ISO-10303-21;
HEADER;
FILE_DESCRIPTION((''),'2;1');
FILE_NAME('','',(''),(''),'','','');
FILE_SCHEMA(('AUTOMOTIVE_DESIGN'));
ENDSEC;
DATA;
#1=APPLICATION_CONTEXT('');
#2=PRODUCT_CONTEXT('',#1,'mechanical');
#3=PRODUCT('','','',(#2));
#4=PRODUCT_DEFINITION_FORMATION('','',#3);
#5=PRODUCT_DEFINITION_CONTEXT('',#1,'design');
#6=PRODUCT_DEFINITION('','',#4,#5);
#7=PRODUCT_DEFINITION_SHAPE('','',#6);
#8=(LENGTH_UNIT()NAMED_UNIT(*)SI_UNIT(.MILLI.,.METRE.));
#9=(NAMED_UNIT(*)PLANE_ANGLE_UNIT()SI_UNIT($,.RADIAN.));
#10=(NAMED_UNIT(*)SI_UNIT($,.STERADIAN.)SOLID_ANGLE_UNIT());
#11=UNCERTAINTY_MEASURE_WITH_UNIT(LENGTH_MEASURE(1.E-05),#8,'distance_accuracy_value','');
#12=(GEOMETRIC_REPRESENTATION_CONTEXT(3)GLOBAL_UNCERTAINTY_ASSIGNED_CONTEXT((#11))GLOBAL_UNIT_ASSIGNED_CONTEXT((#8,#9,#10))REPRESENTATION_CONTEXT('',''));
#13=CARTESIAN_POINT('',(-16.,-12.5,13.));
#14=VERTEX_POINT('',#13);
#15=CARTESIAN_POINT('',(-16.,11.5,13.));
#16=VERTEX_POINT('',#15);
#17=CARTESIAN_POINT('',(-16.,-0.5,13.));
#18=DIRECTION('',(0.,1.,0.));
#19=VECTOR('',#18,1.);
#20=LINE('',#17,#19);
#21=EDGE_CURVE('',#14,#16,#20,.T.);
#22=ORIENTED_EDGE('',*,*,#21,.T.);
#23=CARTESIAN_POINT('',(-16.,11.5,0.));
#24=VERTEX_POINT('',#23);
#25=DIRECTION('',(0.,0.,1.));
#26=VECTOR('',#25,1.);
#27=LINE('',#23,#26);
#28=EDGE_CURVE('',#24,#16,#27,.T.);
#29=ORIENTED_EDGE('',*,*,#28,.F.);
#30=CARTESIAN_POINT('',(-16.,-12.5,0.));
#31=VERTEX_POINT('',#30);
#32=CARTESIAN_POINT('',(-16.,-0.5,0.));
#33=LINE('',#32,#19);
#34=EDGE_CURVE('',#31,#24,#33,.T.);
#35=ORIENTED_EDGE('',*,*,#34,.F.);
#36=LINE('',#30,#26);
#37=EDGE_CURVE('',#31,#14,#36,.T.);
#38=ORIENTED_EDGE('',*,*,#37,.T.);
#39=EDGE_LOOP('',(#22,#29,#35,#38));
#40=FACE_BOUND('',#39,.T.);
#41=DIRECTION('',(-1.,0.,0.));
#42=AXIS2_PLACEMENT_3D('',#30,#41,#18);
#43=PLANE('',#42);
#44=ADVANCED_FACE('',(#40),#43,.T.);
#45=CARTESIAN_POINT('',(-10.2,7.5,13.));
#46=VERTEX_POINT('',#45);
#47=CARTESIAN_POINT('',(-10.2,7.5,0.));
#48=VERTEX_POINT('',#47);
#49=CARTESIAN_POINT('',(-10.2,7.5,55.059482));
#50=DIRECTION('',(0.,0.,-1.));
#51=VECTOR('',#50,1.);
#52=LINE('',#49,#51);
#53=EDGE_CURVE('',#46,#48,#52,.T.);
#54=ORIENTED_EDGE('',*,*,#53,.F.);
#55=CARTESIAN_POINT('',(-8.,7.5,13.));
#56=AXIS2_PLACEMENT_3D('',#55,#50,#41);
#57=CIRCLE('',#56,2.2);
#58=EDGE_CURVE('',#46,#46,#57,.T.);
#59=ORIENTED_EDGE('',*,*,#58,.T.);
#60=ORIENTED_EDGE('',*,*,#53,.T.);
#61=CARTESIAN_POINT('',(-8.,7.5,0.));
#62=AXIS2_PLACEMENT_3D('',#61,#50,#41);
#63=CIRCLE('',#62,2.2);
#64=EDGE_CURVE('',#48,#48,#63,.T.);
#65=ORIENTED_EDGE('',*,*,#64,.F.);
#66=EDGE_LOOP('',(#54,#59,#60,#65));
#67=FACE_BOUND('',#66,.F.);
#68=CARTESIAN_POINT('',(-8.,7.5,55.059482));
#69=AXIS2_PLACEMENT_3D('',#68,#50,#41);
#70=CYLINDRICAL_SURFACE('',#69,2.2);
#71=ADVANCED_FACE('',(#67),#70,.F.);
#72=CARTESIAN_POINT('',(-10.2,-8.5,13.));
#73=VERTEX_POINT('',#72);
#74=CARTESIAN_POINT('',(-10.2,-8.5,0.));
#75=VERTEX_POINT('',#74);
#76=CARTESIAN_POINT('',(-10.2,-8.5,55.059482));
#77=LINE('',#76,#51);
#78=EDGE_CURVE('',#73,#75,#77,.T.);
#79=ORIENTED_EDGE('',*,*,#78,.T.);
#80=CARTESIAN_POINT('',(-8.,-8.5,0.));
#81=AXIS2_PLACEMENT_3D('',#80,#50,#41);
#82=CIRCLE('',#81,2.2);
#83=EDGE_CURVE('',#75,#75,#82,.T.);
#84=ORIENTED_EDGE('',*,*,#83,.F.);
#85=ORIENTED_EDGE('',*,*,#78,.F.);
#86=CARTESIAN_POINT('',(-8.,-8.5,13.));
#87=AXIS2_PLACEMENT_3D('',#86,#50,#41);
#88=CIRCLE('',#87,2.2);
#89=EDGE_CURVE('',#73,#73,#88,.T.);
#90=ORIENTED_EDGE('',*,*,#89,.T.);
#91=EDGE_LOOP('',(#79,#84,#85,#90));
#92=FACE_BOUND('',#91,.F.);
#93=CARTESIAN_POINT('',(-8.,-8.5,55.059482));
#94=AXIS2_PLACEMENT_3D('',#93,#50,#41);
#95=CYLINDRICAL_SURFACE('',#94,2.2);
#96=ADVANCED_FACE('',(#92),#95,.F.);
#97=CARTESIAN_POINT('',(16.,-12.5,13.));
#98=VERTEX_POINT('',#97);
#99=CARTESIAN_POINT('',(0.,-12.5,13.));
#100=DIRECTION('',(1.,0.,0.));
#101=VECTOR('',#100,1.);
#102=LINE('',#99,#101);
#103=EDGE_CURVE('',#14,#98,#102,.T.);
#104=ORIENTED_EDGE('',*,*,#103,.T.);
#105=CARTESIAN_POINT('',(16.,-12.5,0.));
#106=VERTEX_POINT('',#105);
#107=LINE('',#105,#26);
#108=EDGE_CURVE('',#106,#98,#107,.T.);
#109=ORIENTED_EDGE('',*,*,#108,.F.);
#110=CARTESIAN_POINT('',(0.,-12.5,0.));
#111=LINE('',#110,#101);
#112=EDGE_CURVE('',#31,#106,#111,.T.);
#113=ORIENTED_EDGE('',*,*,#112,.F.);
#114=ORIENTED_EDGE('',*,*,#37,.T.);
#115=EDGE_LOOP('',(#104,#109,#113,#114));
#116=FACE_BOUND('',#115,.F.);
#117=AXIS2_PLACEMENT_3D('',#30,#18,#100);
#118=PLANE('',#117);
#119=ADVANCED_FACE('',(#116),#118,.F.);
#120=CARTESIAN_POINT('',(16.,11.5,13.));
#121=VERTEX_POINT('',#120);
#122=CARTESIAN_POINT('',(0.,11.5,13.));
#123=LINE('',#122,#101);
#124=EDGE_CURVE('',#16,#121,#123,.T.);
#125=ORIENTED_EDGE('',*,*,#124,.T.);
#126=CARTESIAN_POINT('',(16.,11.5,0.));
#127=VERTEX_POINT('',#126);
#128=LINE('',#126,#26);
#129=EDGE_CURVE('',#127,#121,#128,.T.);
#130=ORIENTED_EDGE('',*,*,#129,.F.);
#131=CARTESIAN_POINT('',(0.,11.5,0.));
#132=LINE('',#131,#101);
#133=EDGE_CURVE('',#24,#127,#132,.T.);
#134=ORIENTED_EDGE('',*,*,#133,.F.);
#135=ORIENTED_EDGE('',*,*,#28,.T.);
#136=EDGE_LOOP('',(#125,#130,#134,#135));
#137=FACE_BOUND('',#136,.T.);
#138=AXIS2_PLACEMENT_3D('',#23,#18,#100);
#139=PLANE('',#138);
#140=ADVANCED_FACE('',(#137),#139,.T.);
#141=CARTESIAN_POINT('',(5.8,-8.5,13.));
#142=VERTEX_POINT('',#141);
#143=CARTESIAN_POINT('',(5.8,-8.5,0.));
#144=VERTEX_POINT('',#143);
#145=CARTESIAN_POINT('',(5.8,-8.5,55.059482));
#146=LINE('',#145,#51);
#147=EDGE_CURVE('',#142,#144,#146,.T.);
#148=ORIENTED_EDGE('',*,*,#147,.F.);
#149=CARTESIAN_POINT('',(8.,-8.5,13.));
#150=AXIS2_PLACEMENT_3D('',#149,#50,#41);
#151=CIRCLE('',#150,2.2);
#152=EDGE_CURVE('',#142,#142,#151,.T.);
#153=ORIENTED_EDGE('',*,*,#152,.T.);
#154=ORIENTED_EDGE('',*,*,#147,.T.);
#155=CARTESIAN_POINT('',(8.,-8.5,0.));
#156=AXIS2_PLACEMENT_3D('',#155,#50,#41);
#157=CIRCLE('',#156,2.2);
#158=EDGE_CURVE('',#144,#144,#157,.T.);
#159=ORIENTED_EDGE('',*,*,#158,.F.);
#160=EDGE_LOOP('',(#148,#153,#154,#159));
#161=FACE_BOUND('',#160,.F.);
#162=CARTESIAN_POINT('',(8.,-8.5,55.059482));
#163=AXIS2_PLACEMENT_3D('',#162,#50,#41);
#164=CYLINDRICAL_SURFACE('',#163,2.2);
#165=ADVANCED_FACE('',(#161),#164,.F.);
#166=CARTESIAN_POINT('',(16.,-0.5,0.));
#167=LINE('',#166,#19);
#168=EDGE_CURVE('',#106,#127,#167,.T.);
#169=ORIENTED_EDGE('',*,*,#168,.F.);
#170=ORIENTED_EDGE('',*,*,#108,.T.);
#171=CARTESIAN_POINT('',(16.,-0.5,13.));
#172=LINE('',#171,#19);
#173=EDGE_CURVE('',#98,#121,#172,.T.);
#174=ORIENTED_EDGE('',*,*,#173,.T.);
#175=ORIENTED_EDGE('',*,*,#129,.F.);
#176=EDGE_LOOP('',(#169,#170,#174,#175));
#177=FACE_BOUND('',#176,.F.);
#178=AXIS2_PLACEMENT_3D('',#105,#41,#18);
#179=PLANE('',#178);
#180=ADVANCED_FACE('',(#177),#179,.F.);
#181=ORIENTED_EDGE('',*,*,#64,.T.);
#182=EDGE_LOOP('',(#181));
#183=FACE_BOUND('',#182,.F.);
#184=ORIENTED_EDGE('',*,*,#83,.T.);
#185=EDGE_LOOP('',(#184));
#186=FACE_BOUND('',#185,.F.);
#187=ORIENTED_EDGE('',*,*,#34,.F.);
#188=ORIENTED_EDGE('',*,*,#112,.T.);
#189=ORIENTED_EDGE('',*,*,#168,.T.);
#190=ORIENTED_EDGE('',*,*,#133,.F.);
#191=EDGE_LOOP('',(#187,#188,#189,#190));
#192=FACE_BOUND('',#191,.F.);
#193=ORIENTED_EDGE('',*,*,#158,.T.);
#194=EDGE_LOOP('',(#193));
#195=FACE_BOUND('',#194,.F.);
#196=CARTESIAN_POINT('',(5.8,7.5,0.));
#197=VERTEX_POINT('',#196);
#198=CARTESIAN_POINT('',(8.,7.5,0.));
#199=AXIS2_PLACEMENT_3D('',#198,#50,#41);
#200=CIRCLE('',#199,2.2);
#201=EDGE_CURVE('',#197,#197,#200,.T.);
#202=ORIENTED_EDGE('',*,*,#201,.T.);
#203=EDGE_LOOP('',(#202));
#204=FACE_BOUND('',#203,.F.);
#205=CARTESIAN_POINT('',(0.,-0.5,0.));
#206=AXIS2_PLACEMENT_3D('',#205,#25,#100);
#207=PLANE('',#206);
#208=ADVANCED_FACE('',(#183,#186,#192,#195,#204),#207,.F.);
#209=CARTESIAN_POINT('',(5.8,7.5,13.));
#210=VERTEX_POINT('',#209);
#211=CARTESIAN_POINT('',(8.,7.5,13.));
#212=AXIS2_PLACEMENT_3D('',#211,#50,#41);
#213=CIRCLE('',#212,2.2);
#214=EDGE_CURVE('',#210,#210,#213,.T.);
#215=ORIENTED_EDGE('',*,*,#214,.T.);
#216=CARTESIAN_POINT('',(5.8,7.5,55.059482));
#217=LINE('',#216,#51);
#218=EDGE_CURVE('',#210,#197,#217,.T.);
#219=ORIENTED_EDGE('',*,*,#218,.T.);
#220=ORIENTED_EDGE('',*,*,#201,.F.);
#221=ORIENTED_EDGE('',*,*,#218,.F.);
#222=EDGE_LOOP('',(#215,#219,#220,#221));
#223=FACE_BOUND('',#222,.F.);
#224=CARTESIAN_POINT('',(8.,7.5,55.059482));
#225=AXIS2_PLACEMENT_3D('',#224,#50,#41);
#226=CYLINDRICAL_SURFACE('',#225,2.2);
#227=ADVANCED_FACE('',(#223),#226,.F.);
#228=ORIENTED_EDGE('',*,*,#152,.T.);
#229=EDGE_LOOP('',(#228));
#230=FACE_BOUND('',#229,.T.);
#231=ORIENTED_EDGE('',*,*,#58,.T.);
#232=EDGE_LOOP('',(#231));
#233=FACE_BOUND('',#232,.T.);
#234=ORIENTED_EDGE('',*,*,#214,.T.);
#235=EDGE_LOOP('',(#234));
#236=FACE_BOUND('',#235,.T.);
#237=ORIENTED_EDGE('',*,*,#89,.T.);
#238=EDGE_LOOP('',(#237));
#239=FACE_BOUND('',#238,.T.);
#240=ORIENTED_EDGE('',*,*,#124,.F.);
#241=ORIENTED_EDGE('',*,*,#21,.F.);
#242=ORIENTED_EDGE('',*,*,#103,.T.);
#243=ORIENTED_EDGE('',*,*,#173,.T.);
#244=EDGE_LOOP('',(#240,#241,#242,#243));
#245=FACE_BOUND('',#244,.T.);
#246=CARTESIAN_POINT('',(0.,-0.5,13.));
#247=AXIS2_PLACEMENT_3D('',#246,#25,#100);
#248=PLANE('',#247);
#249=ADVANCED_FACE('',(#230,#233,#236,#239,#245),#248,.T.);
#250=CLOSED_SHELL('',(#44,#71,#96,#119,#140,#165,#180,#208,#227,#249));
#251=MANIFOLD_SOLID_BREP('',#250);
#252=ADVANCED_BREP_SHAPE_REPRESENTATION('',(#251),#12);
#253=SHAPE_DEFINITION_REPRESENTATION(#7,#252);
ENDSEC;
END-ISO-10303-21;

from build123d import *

# Parameters (mm, degrees)
F0_W     = 32
F0_H     = 24
F1_DEPTH = 13
F4_D     = 4.4


# Not quite as in the source:
# - a feature names something its author has since deleted; it is built from what else it names


with BuildPart() as f1:
    # F0 (on Top) → F1 (new body)
    with BuildSketch(Plane.XY):
        with Locations((0, -0.5)):
            Rectangle(F0_W, F0_H)
    extrude(amount=F1_DEPTH)

    # F4 (through all)
    with Locations(Plane.XY.offset(13)):
        with Locations((-8, 7.5), (8, 7.5), (8, -8.5), (-8, -8.5)):
            Hole(F4_D / 2)


solid = f1.part
